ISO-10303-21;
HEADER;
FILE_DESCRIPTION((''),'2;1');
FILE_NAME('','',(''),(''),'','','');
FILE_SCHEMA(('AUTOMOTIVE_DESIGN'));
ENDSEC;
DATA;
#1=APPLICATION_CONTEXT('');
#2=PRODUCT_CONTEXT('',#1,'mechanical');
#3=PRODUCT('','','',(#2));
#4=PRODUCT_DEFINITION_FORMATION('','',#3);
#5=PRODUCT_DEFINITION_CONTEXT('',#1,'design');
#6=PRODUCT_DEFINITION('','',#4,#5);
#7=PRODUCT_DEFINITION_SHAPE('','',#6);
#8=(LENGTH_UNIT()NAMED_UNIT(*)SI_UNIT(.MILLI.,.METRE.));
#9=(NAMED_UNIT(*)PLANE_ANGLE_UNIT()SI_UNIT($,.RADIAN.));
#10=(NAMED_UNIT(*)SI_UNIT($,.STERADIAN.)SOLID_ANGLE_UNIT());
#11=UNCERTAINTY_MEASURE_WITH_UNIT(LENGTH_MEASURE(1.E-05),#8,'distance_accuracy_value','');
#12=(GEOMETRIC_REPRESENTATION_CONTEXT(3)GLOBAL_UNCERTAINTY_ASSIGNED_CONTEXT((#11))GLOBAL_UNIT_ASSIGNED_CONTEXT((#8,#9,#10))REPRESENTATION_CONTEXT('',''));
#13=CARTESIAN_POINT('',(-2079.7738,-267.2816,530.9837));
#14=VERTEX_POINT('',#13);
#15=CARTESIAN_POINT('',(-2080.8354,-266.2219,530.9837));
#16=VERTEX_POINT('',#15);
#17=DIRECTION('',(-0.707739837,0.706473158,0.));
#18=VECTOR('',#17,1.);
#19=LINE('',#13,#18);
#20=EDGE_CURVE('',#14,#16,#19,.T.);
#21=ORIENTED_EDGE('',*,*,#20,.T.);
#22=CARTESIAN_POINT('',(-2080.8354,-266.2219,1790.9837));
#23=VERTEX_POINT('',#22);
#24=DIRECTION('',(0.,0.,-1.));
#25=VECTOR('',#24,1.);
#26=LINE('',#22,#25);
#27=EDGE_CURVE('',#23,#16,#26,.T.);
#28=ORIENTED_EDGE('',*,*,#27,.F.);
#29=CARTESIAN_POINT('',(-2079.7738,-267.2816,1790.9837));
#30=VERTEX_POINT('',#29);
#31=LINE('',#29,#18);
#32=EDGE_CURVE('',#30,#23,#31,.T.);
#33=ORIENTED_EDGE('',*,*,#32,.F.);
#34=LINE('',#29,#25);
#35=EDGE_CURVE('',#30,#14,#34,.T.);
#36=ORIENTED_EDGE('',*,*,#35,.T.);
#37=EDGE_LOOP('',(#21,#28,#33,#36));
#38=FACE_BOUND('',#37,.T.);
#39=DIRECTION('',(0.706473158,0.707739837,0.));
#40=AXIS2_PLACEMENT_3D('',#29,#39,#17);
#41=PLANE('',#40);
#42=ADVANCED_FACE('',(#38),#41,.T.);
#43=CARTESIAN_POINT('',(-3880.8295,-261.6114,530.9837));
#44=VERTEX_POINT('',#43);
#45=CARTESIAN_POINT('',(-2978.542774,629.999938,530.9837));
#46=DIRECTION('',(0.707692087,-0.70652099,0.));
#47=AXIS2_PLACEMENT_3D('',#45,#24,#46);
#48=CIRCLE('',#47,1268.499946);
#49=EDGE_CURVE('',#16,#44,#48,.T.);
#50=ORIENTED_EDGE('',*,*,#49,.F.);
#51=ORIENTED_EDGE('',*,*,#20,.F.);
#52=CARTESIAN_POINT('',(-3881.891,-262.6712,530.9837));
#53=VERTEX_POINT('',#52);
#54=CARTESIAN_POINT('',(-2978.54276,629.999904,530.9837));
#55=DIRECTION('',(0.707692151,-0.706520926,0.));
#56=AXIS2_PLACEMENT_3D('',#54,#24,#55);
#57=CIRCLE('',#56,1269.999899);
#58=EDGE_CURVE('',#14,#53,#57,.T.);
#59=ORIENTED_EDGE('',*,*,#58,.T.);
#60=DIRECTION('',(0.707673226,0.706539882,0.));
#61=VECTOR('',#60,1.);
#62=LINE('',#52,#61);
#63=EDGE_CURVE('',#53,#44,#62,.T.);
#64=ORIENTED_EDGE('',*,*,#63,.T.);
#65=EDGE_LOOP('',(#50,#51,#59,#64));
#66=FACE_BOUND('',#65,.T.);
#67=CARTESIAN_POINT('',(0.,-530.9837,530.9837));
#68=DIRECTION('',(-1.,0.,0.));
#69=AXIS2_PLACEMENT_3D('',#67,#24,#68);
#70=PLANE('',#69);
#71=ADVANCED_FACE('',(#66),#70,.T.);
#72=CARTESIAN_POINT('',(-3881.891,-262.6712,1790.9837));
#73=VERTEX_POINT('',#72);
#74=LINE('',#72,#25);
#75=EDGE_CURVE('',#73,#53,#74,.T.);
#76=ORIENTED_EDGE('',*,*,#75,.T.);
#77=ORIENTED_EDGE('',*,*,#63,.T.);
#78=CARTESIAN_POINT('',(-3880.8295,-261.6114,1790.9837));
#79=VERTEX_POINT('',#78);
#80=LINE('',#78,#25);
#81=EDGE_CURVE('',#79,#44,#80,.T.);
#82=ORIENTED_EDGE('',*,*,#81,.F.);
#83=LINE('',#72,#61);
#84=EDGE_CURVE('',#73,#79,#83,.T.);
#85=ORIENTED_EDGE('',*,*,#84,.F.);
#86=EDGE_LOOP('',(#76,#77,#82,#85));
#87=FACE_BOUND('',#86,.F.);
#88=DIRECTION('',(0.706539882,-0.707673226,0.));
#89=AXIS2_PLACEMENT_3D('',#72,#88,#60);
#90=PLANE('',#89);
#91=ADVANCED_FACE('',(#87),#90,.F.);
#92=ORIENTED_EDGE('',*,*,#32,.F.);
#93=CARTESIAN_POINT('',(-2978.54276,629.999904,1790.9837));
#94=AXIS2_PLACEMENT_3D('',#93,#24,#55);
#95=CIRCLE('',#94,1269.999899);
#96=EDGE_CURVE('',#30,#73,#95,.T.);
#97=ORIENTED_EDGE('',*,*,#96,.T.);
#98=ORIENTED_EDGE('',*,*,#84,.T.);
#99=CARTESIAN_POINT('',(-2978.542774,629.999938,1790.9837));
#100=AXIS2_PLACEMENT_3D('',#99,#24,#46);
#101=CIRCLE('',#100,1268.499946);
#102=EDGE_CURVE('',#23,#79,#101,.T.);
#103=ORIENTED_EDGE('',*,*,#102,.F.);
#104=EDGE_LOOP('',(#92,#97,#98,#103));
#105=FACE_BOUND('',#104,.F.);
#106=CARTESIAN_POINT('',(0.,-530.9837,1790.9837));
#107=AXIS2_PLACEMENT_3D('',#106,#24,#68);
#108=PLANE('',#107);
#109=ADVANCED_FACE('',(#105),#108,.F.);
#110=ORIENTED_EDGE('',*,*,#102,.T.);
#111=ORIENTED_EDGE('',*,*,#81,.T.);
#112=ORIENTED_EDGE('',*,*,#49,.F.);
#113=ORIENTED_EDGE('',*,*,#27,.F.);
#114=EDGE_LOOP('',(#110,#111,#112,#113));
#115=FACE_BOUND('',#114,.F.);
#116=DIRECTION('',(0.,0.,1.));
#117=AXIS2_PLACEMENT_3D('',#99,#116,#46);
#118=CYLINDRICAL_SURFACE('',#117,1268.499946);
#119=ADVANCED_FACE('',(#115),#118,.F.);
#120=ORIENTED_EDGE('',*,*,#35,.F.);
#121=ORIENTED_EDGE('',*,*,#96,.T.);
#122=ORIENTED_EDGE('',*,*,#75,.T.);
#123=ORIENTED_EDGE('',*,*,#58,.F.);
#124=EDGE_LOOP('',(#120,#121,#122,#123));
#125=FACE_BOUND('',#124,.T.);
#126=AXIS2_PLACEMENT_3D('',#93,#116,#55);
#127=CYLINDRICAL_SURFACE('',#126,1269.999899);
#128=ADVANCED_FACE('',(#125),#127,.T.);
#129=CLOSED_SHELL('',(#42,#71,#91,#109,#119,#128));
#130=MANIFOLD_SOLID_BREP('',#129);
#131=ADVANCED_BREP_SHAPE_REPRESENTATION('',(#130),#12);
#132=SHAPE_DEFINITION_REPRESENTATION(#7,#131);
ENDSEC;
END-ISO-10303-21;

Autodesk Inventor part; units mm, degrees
ref_plane "YZ Plane" through (0, 0, 0) normal (1, 0, 0) x (0, 1, 0)
ref_plane "XZ Plane" through (0, 0, 0) normal (0, 1, 0) x (-1, 0, 0)
ref_plane "XY Plane" through (0, 0, 0) normal (0, 0, 1) x (1, 0, 0)
sketch "Sketch1" plane through (0, 0, 0) normal (0, 1, 0) x (-1, 0, 0)
  arc A0 (2079.7738, 263.7021) -> (3881.891, 268.3125) centre (2978.5428, 1160.9837) ccw
  arc A1 (2080.8354, 264.7618) -> (3880.8295, 269.3723) centre (2978.5428, 1160.9837) ccw
  line L0 (3881.891, 268.3125) -> (3880.8295, 269.3723)
  line L1 (2079.7738, 263.7021) -> (2080.8354, 264.7618)
  point P0 (0, 0)
  dimension "d9" = 1.5
  dimension "d16" = 1800
  dimension "d22" = 1270
extrude "Extrusion1" add sketch "Sketch1" along normal blind 1260
move or copy body "Girar1" bodies to move or copy 1 copy no rotation origin (0, 0, 0) rotation axis (1, 0, 0) rotation angle -90 translate (0, -530.9837, 1790.9837)
properties part number "CHAPA_INOX_Tonatiuh"
